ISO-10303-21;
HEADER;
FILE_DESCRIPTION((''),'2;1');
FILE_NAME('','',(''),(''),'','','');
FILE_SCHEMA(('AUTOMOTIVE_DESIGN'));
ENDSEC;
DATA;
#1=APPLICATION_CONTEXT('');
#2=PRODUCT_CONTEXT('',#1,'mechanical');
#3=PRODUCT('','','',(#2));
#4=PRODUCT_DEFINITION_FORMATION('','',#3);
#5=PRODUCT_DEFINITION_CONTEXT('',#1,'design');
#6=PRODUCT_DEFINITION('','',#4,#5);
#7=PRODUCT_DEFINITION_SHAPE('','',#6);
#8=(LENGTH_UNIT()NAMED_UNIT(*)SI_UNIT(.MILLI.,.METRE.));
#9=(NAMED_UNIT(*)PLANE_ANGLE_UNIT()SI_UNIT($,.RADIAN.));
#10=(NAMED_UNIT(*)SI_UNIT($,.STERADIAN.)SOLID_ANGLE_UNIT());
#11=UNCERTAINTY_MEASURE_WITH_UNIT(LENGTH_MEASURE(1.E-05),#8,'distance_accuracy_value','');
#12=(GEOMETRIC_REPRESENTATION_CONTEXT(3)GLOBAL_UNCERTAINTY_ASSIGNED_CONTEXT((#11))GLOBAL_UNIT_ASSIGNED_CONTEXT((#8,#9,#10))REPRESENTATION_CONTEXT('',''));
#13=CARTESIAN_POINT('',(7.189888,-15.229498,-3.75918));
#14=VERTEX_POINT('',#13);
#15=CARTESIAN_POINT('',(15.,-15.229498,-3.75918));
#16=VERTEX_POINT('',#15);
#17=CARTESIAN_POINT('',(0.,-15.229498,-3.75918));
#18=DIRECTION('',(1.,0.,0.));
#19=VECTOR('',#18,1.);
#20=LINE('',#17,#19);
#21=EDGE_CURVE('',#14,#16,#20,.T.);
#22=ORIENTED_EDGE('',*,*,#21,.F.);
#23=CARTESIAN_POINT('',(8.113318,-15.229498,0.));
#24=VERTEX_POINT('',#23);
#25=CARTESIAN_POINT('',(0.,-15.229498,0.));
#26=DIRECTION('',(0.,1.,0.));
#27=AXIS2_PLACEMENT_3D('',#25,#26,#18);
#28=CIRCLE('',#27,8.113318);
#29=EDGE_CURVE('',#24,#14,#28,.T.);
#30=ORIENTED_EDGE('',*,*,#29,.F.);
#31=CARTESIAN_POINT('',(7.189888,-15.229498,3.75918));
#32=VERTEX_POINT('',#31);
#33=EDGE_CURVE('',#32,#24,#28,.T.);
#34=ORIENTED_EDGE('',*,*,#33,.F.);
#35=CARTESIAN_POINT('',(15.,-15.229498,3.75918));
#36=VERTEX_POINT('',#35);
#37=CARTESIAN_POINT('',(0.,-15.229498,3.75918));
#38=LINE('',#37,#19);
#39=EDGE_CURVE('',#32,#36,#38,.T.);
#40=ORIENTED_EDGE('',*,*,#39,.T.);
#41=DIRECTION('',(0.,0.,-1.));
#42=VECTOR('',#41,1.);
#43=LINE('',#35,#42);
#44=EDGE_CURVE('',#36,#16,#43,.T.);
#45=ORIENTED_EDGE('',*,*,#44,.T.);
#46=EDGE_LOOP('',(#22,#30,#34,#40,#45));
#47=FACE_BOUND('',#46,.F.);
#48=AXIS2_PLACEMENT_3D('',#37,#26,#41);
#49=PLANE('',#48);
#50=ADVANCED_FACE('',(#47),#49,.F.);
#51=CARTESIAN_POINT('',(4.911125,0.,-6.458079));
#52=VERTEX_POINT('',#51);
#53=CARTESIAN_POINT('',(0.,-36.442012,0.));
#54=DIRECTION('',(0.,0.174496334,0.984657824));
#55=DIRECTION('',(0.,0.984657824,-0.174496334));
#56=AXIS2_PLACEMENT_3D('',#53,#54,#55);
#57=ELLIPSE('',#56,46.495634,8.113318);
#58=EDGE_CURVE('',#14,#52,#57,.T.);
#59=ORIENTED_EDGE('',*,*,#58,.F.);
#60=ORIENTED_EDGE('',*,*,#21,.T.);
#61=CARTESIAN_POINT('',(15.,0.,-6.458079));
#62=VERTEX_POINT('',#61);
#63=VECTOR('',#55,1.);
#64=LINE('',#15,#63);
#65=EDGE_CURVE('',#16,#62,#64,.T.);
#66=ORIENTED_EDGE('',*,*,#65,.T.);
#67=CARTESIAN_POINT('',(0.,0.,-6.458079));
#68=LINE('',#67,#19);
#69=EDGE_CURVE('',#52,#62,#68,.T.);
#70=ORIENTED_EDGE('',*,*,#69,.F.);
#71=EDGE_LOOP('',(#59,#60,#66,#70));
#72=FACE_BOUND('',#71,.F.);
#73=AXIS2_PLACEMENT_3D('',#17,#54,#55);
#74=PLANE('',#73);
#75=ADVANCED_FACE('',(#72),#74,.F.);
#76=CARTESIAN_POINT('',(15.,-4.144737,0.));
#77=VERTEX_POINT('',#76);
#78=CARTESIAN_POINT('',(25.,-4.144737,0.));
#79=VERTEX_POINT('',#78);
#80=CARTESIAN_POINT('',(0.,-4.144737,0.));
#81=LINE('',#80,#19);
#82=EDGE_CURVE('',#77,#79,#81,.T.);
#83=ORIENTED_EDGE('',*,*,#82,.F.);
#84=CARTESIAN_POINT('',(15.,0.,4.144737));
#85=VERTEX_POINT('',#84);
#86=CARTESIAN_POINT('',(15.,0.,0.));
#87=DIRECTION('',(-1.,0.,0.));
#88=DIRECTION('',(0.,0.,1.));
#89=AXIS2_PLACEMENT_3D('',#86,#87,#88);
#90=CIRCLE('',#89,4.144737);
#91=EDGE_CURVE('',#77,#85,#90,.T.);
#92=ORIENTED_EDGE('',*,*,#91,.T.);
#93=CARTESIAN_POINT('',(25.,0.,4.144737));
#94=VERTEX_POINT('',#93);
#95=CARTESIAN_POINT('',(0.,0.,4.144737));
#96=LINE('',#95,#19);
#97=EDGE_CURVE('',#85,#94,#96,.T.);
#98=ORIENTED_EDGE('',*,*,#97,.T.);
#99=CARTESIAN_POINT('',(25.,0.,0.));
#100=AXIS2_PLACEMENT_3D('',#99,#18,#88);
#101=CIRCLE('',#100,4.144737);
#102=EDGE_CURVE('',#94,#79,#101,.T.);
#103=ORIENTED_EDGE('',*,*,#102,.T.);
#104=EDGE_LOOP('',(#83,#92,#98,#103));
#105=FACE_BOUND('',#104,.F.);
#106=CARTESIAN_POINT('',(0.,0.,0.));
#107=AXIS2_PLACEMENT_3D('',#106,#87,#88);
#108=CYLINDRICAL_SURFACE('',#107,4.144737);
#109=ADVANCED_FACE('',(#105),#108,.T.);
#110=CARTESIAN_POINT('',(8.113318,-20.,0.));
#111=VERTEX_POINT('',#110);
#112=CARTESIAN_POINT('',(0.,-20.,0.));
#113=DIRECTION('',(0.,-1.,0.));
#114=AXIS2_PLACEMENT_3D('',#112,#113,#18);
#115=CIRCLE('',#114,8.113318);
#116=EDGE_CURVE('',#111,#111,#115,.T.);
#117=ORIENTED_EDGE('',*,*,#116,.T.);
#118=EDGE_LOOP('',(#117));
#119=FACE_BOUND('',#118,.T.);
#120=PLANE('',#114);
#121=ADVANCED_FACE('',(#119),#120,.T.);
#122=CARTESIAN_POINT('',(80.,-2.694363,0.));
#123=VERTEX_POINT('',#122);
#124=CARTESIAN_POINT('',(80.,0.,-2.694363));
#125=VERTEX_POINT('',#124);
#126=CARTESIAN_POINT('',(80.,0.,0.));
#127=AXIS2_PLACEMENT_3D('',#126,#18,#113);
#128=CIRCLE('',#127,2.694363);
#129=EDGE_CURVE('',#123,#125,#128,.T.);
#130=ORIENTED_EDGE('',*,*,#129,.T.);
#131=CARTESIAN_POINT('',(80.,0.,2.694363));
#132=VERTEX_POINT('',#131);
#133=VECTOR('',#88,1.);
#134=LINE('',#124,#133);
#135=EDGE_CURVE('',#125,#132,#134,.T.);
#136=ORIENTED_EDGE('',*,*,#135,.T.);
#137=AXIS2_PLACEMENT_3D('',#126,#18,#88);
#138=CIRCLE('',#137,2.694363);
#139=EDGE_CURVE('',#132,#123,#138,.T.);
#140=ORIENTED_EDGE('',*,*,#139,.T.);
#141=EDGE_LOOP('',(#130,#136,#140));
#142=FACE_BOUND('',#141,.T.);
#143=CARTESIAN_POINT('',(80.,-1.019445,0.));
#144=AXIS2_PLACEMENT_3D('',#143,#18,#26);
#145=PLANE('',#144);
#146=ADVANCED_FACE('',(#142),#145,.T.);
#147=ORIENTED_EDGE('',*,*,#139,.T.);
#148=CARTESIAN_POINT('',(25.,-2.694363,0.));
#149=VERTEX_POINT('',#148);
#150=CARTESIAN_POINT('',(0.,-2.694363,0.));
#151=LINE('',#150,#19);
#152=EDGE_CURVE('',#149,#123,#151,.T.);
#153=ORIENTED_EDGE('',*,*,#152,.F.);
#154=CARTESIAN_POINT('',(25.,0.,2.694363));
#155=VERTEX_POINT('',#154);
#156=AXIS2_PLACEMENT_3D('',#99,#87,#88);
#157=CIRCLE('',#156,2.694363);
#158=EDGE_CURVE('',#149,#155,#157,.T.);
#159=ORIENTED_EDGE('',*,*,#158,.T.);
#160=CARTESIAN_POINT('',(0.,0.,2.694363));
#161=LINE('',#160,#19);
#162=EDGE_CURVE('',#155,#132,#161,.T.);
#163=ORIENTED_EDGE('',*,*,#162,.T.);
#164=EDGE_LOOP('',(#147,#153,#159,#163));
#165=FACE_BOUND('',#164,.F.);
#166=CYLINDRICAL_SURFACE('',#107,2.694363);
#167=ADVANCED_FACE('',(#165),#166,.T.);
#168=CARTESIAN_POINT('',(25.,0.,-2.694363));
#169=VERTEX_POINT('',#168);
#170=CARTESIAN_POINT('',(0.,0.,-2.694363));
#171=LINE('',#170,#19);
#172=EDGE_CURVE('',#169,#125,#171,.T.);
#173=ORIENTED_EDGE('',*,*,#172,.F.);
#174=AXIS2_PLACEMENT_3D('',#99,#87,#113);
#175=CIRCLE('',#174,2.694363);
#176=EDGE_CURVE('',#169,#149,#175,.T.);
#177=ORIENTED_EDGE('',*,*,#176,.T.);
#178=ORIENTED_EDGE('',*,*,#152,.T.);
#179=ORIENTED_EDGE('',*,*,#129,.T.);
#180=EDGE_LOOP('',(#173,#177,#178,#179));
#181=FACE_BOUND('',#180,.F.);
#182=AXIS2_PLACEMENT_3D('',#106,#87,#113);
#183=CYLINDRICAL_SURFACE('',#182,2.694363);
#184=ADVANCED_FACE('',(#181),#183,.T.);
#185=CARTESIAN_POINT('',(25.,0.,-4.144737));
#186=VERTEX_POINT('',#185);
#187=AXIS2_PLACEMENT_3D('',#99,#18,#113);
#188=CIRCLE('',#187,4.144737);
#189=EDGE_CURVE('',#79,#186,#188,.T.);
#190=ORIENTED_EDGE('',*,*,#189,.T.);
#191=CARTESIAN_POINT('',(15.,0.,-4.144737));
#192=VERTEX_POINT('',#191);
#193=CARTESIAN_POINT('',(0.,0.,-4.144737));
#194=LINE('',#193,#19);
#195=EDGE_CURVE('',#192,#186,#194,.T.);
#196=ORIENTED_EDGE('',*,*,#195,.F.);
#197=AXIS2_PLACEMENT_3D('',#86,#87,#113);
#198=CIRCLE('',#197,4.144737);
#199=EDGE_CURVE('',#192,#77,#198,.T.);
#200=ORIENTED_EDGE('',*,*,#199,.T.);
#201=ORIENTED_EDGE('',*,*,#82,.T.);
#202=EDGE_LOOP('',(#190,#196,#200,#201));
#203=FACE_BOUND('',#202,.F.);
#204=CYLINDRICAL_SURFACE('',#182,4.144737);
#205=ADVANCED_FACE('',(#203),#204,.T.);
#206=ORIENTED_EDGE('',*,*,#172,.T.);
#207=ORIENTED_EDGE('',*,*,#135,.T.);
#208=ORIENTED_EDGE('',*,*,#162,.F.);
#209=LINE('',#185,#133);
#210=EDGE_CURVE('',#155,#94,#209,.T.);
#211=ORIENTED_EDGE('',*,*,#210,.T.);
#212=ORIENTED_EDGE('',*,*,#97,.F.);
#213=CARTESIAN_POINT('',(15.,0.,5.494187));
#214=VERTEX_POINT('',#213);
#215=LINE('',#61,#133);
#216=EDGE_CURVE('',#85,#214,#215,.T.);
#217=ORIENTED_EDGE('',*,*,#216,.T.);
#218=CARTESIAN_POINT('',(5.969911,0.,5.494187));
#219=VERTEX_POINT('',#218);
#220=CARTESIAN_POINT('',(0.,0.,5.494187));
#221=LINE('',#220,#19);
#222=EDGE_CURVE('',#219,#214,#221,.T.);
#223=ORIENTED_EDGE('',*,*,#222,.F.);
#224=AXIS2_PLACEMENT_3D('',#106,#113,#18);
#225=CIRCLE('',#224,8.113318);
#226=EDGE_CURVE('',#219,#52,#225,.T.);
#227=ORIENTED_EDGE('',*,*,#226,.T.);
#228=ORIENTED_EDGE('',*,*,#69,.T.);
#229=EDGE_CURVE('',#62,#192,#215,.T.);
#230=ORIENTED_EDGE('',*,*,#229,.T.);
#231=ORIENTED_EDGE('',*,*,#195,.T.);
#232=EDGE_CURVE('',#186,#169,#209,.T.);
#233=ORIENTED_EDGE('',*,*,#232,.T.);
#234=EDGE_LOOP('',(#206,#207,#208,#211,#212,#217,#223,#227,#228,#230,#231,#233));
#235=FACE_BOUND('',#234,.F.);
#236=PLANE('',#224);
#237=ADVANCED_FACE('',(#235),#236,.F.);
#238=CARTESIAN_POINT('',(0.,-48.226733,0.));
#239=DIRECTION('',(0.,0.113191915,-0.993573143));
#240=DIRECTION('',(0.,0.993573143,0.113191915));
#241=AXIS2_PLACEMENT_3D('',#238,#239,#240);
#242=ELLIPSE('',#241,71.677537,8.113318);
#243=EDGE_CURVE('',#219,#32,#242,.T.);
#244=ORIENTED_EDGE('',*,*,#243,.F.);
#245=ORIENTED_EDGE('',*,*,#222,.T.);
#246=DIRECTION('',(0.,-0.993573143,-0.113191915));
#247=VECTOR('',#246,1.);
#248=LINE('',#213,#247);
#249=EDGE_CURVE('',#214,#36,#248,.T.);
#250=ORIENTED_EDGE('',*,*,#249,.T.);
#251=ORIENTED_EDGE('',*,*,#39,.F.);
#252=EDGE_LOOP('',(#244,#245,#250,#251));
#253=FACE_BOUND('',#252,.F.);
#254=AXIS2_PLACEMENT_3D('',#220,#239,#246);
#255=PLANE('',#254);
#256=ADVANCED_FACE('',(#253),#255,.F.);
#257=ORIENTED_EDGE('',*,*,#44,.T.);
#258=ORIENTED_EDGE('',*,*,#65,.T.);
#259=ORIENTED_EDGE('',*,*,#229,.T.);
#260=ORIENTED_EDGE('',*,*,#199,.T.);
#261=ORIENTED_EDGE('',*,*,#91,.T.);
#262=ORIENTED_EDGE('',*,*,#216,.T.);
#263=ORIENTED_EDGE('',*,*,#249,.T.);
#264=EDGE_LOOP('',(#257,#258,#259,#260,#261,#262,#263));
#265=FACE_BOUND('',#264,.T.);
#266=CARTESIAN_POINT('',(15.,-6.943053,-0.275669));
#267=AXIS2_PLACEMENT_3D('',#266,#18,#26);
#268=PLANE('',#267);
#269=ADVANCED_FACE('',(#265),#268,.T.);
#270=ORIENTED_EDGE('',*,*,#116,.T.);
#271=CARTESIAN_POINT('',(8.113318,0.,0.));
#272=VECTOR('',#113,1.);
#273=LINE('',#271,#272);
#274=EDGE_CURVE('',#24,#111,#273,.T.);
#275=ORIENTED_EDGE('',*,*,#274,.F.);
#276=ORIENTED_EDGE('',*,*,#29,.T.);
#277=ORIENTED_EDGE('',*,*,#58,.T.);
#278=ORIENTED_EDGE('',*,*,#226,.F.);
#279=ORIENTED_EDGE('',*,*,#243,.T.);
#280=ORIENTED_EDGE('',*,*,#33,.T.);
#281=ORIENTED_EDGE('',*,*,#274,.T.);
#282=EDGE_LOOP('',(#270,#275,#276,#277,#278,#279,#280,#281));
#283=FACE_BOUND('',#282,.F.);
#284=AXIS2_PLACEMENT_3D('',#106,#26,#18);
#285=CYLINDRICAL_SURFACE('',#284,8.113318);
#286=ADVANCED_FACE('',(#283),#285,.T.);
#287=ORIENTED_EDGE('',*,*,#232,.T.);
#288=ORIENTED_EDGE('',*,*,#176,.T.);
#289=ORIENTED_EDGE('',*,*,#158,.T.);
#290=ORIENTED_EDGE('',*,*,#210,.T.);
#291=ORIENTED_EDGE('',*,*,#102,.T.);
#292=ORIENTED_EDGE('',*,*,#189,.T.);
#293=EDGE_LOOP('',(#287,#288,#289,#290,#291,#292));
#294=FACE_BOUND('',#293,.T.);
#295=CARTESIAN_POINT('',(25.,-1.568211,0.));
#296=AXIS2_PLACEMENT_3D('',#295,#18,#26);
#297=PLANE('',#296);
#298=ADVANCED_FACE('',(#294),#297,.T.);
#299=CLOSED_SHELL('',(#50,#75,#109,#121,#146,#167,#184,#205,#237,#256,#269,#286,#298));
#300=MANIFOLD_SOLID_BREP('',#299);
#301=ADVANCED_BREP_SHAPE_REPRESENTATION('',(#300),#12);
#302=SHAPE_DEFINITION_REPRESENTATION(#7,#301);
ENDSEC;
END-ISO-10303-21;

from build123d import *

# Parameters (mm, degrees)
F0_R     = 8.1133177019
F1_DEPTH = 20
F3_DEPTH = 15
F5_DEPTH = 25
F7_DEPTH = 80


# Not quite as in the source:
# - a feature names something its author has since deleted; it is built from what else it names


with BuildPart() as f1:
    # F0 (on Front) → F1 (new body)
    with BuildSketch(Plane.XZ):
        Circle(F0_R)
    extrude(amount=F1_DEPTH)

    # F2 (on Right) → F3 (join)
    with BuildSketch(Plane.YZ):
        Polygon((0, -6.4580785111), (0, 5.4941866547), (-15.2294980362, 3.7591799628), (-15.2294980362, -3.7591799628), align=None)
    extrude(amount=F3_DEPTH)

    # F4 (on Right) → F5 (join)
    with BuildSketch(Plane.YZ):
        with BuildLine():
            ThreePointArc((-4.1447370313, 0), (-2.9307716611, -2.9307716611), (0, -4.1447370313))
            Line((0, -4.1447370313), (0, 4.1447370313))
            ThreePointArc((0, 4.1447370313), (-2.9307716611, 2.9307716611), (-4.1447370313, 0))
        make_face()
    extrude(amount=F5_DEPTH)

    # F6 (on Right) → F7 (join)
    with BuildSketch(Plane.YZ):
        with BuildLine():
            ThreePointArc((-2.6943630073, 0), (-1.9052023535, -1.9052023535), (0, -2.6943630073))
            Line((0, -2.6943630073), (0, 2.6943630073))
            ThreePointArc((0, 2.6943630073), (-1.9052023535, 1.9052023535), (-2.6943630073, 0))
        make_face()
    extrude(amount=F7_DEPTH)


solid = f1.part
